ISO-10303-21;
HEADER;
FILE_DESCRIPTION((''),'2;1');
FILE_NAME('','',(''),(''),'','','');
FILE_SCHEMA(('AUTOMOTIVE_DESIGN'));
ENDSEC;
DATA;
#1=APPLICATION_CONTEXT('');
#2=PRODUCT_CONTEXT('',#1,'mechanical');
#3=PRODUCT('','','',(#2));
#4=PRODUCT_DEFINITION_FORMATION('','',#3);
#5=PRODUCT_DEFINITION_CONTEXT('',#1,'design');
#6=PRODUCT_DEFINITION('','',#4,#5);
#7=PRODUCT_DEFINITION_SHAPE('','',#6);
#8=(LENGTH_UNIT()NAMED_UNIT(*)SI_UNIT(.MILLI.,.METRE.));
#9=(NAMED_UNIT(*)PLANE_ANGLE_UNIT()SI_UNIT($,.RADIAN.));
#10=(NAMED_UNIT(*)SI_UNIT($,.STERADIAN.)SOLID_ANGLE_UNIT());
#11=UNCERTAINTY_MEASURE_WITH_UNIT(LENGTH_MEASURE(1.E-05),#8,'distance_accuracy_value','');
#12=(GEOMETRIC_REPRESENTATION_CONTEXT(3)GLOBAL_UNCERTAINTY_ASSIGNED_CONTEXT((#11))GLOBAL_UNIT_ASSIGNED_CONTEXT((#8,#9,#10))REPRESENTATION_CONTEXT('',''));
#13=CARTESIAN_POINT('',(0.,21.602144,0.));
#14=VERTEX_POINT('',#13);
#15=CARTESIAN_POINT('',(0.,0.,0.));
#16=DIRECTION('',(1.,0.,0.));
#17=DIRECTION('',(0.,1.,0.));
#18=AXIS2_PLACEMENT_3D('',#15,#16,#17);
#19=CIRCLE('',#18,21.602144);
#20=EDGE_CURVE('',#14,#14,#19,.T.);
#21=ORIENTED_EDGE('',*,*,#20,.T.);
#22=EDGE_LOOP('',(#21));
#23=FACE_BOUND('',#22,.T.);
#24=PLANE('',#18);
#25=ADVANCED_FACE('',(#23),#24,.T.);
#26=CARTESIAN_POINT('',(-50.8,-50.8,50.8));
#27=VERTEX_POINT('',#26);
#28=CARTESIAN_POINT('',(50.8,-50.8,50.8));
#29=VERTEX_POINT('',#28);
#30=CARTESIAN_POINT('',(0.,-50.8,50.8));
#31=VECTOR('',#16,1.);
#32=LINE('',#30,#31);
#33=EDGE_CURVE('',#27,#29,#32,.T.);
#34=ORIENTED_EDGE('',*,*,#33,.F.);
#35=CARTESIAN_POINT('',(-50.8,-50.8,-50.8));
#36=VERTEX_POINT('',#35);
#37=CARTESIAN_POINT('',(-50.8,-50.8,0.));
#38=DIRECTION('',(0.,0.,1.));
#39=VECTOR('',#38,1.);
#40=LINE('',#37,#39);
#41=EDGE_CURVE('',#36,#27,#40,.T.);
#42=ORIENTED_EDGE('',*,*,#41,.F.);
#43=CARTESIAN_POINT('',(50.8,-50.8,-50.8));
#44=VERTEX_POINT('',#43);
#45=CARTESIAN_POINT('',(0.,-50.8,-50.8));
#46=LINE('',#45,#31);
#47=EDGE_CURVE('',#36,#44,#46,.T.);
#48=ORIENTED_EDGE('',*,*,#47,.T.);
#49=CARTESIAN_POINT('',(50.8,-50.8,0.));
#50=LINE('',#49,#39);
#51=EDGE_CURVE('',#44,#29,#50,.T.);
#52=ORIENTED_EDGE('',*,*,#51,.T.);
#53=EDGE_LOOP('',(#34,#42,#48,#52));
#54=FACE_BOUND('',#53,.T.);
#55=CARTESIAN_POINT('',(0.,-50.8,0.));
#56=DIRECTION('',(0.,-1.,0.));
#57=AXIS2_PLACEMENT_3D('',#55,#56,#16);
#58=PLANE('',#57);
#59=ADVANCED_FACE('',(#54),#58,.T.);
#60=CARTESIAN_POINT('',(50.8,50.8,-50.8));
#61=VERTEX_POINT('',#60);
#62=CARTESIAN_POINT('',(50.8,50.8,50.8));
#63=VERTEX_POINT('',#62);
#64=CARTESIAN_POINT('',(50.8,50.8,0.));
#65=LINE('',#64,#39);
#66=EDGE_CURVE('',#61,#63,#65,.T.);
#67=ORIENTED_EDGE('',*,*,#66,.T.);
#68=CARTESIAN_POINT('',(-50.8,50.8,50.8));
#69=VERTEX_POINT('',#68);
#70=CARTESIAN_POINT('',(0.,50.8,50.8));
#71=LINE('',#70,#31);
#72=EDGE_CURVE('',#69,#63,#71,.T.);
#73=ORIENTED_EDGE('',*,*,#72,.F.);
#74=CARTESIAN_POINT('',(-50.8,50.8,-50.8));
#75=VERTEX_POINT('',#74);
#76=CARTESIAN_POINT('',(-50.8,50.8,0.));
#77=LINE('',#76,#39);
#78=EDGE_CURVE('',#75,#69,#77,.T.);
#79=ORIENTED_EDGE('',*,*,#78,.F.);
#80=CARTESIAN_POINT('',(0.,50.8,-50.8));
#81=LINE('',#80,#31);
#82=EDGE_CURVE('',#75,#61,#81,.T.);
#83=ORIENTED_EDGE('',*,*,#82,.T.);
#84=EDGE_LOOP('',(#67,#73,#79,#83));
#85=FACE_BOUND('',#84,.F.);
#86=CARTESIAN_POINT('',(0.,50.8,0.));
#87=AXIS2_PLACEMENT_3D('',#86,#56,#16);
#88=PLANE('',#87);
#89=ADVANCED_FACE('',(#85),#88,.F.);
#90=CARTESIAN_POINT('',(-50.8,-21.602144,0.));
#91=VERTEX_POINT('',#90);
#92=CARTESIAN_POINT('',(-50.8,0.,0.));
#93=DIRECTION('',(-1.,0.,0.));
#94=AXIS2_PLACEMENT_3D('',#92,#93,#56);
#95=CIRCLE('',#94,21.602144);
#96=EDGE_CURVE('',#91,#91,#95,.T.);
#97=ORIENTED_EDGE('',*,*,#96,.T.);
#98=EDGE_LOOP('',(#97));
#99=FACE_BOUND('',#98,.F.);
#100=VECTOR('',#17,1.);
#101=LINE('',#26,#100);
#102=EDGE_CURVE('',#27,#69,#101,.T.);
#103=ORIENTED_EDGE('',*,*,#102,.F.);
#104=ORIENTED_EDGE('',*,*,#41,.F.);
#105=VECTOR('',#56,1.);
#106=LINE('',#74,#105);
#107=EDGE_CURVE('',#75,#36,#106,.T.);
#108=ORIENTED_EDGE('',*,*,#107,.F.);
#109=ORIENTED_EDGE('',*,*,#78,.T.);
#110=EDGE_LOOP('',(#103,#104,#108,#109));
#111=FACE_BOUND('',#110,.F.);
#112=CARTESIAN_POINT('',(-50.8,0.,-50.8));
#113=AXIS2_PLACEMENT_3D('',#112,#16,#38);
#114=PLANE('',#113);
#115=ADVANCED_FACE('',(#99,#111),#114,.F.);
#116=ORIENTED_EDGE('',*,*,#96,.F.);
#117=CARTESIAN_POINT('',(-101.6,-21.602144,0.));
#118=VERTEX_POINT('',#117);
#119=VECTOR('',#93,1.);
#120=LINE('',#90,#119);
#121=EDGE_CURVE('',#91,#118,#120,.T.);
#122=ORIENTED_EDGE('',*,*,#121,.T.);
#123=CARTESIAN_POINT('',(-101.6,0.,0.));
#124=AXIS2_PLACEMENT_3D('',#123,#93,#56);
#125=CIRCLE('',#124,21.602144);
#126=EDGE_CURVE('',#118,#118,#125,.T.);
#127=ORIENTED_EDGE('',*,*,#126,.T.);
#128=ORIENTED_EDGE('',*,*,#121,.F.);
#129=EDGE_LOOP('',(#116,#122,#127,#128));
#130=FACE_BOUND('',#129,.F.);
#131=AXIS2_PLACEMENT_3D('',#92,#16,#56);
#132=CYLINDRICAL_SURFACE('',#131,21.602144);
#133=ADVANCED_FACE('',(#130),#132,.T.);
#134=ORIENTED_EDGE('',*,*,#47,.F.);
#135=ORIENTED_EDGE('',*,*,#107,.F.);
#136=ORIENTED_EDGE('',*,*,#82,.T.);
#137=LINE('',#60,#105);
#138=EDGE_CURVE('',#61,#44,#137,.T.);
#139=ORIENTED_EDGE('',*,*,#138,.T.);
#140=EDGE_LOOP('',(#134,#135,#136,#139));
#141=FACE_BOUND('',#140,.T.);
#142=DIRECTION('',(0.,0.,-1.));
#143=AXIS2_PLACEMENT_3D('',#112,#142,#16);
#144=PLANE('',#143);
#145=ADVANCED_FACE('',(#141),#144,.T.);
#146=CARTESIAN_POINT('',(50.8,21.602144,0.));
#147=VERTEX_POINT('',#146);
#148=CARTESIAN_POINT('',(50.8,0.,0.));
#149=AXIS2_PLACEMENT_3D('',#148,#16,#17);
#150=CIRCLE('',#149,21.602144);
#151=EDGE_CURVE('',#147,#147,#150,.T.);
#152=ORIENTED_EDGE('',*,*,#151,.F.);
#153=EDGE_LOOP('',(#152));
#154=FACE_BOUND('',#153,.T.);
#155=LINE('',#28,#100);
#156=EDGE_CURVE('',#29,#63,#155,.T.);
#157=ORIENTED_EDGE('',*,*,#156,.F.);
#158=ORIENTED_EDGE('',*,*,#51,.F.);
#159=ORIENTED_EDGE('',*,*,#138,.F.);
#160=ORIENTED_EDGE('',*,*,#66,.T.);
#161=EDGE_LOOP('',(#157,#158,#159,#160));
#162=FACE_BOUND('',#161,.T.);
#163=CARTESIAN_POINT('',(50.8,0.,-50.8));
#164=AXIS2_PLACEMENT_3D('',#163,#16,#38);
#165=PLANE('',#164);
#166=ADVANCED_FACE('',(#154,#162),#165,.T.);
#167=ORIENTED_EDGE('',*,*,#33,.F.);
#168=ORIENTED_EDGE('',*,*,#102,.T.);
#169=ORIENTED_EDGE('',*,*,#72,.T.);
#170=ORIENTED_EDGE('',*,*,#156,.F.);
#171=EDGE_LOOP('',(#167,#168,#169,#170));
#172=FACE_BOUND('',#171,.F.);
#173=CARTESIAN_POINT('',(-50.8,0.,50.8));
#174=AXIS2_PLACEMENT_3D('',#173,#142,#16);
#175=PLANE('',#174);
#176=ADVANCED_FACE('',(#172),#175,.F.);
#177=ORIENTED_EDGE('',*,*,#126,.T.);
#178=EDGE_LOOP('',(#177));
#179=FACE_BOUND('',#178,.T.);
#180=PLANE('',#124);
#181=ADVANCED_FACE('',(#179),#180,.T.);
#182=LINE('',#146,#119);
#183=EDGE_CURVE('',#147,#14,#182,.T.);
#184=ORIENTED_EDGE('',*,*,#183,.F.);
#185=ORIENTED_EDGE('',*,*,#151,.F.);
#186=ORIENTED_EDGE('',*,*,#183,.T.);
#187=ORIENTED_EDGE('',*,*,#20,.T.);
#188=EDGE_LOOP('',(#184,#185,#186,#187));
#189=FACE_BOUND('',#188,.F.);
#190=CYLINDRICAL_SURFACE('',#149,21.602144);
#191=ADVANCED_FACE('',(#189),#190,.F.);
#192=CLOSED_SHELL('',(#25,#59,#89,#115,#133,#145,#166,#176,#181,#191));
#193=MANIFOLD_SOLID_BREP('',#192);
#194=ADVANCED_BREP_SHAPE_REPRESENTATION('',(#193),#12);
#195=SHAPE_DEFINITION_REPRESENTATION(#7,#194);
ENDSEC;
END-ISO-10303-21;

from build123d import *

# Parameters (mm, degrees)
F1_W     = 101.6
F1_H     = 101.6
F2_DEPTH = 50.8
F3_R     = 21.6021439773
F4_DEPTH = 50.8
F5_R     = 21.6021439773
F6_DEPTH = 50.8


# Not quite as in the source:
# - a variable given as a bare number and used for a length is read in inches; the dataset says mm whatever the document's units were


with BuildPart() as f2:
    # F1 (on Front) → F2 (new body, symmetric)
    with BuildSketch(Plane.XZ):
        Rectangle(F1_W, F1_H)
    extrude(amount=F2_DEPTH, both=True)

    # F3 (on face) → F4 (cut)
    with BuildSketch(Plane.YZ.offset(50.8)):
        Circle(F3_R)
    extrude(amount=-F4_DEPTH, mode=Mode.SUBTRACT)

    # F5 (on face) → F6 (join)
    with BuildSketch(Plane(origin=(-50.8, 0, 0), x_dir=(0, -1, 0), z_dir=(-1, 0, 0))):
        Circle(F5_R)
    extrude(amount=F6_DEPTH)


solid = f2.part
